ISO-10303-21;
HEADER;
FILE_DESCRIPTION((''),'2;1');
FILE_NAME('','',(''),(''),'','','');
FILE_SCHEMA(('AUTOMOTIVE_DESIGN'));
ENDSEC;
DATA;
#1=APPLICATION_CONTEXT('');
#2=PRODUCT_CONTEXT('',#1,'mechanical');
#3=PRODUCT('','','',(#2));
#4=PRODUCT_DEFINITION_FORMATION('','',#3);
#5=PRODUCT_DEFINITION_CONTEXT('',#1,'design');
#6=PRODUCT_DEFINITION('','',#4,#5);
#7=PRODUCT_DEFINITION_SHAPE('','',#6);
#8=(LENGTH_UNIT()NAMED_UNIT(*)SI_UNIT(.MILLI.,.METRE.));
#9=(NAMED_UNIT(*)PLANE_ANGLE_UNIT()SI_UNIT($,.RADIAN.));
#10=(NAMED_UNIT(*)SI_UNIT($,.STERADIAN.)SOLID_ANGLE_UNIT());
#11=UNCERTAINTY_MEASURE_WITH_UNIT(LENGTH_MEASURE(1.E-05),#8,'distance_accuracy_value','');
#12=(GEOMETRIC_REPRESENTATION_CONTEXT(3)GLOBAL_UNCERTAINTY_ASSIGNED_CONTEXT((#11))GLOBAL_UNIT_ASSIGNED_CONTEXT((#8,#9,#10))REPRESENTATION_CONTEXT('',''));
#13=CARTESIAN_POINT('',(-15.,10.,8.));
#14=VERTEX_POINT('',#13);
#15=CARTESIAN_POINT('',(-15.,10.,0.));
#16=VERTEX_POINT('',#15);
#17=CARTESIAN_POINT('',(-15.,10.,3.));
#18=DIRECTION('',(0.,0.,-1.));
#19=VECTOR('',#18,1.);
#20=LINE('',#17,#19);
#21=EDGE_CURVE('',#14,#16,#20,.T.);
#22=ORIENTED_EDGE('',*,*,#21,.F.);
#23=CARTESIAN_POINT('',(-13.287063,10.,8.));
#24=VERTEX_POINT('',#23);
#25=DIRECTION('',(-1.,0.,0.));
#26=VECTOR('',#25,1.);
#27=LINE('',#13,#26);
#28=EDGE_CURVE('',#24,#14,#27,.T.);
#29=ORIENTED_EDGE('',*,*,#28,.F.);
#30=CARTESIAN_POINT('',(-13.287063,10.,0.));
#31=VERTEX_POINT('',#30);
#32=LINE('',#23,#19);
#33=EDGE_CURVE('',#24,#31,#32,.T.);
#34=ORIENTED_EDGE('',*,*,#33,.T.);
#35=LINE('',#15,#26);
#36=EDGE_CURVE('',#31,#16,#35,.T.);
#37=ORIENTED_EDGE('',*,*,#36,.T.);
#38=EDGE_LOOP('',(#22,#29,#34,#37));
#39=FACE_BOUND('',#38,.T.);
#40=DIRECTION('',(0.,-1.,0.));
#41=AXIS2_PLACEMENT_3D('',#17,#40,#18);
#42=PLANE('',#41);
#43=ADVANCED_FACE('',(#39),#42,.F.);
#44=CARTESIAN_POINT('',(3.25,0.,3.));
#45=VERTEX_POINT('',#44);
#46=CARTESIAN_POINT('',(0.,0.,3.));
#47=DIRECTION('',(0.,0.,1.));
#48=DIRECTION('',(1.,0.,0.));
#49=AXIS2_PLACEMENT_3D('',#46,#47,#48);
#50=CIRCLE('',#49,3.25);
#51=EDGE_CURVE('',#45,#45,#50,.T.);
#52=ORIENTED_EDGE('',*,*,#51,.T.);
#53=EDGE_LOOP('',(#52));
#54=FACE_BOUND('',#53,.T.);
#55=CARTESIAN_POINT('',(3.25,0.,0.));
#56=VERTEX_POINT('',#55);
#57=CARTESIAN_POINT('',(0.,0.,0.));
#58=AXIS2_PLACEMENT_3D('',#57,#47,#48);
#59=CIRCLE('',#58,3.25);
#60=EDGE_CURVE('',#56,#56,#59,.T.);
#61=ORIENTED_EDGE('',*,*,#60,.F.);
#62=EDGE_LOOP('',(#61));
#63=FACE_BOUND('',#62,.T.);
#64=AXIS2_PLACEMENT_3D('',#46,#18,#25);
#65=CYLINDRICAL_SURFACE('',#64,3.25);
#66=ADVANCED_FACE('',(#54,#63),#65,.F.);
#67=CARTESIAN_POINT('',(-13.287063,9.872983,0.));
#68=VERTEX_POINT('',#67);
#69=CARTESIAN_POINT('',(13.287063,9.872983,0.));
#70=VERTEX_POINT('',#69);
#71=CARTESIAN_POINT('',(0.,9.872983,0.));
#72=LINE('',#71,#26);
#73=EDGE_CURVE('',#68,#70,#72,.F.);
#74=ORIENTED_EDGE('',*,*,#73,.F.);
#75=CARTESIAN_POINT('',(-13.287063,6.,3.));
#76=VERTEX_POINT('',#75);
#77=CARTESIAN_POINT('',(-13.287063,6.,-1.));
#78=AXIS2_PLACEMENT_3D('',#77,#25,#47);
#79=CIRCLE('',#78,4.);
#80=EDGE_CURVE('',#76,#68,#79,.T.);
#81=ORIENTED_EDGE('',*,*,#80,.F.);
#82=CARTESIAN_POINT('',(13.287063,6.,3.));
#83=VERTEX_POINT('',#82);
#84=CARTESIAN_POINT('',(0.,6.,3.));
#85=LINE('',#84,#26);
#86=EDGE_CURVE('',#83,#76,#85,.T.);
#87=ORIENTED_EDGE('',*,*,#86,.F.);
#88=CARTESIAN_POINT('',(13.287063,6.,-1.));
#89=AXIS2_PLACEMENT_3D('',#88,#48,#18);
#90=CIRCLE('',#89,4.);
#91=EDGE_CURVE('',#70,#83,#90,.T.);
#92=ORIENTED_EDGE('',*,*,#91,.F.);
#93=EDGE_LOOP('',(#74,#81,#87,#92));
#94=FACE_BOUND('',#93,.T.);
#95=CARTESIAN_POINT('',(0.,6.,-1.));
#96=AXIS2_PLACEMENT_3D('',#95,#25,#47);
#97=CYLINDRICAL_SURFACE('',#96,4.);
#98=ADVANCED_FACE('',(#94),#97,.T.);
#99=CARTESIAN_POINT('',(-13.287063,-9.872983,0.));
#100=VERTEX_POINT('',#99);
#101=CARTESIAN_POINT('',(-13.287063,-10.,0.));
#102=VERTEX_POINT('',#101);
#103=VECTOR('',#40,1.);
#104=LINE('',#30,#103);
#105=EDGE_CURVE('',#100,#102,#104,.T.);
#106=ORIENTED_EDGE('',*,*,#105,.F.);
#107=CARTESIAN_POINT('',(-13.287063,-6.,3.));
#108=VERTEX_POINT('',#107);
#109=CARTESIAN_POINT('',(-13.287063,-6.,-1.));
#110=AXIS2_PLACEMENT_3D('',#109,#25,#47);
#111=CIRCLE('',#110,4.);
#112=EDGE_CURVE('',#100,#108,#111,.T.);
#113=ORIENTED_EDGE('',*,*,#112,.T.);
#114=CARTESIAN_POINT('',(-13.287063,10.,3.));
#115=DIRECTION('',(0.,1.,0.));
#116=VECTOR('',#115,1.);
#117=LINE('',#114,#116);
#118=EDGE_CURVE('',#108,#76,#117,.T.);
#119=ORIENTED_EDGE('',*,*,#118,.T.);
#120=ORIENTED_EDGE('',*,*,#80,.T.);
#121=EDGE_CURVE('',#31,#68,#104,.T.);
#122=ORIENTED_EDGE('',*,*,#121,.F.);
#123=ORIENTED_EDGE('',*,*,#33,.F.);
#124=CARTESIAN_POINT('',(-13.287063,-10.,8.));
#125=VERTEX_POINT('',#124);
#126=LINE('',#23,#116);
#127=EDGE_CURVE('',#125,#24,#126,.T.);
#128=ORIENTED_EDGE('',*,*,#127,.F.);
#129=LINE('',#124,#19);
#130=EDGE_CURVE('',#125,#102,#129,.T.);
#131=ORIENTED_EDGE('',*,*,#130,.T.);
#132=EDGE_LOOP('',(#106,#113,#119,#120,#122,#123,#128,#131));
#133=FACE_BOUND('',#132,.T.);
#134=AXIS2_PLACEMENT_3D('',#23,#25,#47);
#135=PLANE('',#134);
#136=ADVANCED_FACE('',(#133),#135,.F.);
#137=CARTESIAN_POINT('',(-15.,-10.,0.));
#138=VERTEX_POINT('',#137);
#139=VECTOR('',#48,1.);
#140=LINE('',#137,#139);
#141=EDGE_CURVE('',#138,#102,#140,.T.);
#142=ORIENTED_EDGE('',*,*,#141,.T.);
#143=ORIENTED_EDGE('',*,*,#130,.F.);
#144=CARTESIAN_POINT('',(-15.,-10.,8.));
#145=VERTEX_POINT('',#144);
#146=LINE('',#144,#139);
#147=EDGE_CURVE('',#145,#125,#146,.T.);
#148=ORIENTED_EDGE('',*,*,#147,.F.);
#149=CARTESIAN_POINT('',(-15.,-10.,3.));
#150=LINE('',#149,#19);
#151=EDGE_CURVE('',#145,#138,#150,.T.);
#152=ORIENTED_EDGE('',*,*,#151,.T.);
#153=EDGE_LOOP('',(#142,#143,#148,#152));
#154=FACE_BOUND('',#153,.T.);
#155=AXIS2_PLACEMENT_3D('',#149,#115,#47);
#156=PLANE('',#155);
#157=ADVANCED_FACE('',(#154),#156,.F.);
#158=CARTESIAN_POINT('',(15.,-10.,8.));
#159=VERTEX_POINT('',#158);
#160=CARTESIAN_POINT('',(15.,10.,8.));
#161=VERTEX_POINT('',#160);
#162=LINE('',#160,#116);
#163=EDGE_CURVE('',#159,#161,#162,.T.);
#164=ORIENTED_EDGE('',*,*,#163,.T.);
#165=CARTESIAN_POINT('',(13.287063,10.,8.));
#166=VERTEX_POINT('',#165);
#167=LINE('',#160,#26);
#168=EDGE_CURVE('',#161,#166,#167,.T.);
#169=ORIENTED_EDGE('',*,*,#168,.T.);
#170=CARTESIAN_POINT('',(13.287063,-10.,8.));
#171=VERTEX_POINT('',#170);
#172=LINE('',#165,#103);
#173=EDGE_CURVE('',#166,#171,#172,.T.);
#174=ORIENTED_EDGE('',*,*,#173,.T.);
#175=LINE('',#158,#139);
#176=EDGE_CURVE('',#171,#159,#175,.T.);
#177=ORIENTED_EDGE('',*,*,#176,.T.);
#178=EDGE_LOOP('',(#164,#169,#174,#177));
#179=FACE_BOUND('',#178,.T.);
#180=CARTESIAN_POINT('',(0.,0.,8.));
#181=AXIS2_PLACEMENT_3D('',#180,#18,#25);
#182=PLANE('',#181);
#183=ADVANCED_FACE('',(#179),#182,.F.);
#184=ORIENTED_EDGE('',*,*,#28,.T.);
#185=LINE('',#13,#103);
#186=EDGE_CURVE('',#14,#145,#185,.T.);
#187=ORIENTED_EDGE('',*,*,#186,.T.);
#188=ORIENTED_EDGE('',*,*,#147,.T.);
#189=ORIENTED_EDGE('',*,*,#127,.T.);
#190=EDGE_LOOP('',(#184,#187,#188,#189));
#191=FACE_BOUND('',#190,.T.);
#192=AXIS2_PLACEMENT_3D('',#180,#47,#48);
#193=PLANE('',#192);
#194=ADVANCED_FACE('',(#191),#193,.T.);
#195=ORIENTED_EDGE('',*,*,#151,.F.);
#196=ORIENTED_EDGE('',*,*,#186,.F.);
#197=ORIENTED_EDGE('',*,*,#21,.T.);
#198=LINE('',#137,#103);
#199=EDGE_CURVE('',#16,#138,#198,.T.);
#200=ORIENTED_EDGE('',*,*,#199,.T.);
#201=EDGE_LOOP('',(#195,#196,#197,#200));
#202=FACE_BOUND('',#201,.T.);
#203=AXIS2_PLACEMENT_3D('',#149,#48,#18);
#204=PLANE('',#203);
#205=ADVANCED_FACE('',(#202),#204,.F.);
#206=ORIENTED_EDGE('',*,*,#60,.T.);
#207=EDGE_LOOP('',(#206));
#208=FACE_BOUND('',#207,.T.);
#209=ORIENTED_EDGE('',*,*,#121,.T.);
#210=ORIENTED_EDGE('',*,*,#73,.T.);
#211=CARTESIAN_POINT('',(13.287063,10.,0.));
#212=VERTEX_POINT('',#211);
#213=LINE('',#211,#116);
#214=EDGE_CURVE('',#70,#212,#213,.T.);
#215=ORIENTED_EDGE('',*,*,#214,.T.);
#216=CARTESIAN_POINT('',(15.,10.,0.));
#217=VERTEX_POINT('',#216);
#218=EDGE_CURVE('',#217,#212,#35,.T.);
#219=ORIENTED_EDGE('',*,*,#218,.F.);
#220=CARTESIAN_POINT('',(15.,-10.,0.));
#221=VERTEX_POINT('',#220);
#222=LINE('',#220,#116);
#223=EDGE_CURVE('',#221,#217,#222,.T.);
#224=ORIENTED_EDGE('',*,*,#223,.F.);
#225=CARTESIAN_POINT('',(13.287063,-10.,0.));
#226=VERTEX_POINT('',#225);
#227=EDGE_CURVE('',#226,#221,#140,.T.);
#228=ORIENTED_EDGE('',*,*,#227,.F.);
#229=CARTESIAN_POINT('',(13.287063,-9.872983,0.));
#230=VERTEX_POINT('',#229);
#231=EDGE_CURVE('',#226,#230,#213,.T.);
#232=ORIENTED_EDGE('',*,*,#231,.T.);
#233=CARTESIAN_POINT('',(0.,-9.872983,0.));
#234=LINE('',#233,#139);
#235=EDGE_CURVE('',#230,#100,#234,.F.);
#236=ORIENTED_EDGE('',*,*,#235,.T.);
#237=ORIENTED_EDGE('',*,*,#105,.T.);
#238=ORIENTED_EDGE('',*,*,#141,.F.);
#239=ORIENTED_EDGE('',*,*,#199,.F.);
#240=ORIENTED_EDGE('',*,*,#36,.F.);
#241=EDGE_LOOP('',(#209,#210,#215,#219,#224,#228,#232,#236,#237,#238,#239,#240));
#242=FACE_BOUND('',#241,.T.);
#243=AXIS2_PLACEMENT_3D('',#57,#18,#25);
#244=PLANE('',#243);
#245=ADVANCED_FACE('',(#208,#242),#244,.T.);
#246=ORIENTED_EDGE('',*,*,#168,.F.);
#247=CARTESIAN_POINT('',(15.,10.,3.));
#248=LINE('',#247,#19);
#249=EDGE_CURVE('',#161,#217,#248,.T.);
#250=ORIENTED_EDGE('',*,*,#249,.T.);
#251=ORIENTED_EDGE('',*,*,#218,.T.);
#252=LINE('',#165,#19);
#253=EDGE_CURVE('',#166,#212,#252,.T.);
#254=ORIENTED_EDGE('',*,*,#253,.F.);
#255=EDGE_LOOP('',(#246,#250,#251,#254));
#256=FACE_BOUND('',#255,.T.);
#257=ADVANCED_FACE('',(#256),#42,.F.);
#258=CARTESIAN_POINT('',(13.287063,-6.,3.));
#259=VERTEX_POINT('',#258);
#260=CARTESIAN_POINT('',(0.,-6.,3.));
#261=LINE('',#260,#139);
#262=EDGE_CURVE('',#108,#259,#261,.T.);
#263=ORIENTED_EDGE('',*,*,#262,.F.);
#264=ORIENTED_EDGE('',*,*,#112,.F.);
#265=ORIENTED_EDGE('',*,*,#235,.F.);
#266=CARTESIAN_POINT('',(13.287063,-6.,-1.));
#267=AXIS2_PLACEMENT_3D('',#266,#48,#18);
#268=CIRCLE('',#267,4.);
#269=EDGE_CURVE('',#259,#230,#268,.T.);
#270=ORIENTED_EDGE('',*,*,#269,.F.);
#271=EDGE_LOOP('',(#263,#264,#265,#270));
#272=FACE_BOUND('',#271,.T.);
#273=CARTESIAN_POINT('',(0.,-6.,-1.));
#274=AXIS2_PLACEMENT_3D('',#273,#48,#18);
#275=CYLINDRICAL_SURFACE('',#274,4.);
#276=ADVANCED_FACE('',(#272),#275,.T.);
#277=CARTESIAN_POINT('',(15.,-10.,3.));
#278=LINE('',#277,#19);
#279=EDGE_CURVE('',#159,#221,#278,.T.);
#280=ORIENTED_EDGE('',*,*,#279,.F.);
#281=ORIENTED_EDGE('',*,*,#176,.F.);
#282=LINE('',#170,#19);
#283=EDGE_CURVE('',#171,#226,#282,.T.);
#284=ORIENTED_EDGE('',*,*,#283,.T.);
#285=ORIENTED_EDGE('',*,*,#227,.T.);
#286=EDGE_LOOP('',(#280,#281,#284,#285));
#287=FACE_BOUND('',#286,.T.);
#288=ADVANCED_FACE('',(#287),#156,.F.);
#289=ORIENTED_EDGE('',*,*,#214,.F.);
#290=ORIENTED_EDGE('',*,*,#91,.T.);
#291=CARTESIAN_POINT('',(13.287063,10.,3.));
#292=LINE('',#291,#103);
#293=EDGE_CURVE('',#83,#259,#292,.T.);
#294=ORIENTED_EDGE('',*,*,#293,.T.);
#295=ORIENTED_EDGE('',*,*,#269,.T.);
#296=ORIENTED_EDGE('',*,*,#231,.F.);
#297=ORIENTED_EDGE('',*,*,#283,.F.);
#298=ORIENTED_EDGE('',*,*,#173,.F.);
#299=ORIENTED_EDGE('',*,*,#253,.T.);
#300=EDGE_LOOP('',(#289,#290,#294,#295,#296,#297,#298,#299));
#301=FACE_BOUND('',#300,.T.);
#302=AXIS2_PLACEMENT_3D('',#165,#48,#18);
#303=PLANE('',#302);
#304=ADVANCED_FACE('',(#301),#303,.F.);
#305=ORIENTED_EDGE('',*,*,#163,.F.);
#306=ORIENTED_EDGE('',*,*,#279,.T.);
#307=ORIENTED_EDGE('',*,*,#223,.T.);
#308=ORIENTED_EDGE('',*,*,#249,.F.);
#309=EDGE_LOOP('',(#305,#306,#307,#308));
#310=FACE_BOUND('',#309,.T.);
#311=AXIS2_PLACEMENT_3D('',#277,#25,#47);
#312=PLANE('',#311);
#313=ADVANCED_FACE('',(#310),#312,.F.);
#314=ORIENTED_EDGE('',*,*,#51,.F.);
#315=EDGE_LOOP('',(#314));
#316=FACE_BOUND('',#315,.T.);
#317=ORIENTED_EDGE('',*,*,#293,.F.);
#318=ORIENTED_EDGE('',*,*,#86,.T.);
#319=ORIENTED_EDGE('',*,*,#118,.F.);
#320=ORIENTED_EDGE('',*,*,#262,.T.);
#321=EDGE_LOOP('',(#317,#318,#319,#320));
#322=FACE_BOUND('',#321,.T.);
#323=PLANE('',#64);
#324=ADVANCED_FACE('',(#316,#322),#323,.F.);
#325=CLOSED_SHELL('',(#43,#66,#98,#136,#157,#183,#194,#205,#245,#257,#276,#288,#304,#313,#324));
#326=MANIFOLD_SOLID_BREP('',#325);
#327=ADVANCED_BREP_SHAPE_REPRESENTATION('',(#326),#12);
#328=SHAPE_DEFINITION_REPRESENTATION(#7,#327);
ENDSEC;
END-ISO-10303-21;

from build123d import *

# Parameters (mm, degrees)
CROQUIS1_W              = 30
CROQUIS1_H              = 20
CROQUIS1_R              = 3.25
SALIENTE_EXTRUIR1_DEPTH = 3
CROQUIS3_W              = 1.712937005
CROQUIS3_H              = 20
SALIENTE_EXTRUIR2_DEPTH = 5
REDONDEO1_R             = 4
REDONDEO2_R             = 4


with BuildPart() as part:
    # Croquis1 → Saliente-Extruir1 (new body)
    with BuildSketch(Plane.XY):
        Rectangle(CROQUIS1_W, CROQUIS1_H)
        Circle(CROQUIS1_R, mode=Mode.SUBTRACT)
    extrude(amount=SALIENTE_EXTRUIR1_DEPTH)

    # Croquis3 → Saliente-Extruir2 (add)
    with BuildSketch(Plane.XY.offset(3)):
        with Locations((-14.143531498, 0)):
            Rectangle(CROQUIS3_W, CROQUIS3_H)
        with Locations((14.143531498, 0)):
            Rectangle(CROQUIS3_W, CROQUIS3_H)
    extrude(amount=SALIENTE_EXTRUIR2_DEPTH)

    # Redondeo1
    # the kernel refuses this fillet: 4 mm, written as the material it takes off along each edge
    with BuildSketch(Plane(origin=(13.287062995, 10, 3), x_dir=(0, 0, -1), z_dir=(-1, 0, 0))) as redondeo1_piece_1:
        with BuildLine():
            CenterArc((REDONDEO1_R, REDONDEO1_R), REDONDEO1_R, 180, 90)
            Line((0, REDONDEO1_R), (0, 0))
            Line((0, 0), (REDONDEO1_R, 0))
        make_face()
    extrude(amount=26.574125991, mode=Mode.SUBTRACT)

    # Redondeo2
    # the kernel refuses this fillet: 4 mm, written as the material it takes off along each edge
    with BuildSketch(Plane(origin=(-13.287062995, -10, 3), x_dir=(0, 0, -1), z_dir=(1, 0, 0))) as redondeo2_piece_1:
        with BuildLine():
            CenterArc((REDONDEO2_R, REDONDEO2_R), REDONDEO2_R, 180, 90)
            Line((0, REDONDEO2_R), (0, 0))
            Line((0, 0), (REDONDEO2_R, 0))
        make_face()
    extrude(amount=26.574125991, mode=Mode.SUBTRACT)


solid = part.part
